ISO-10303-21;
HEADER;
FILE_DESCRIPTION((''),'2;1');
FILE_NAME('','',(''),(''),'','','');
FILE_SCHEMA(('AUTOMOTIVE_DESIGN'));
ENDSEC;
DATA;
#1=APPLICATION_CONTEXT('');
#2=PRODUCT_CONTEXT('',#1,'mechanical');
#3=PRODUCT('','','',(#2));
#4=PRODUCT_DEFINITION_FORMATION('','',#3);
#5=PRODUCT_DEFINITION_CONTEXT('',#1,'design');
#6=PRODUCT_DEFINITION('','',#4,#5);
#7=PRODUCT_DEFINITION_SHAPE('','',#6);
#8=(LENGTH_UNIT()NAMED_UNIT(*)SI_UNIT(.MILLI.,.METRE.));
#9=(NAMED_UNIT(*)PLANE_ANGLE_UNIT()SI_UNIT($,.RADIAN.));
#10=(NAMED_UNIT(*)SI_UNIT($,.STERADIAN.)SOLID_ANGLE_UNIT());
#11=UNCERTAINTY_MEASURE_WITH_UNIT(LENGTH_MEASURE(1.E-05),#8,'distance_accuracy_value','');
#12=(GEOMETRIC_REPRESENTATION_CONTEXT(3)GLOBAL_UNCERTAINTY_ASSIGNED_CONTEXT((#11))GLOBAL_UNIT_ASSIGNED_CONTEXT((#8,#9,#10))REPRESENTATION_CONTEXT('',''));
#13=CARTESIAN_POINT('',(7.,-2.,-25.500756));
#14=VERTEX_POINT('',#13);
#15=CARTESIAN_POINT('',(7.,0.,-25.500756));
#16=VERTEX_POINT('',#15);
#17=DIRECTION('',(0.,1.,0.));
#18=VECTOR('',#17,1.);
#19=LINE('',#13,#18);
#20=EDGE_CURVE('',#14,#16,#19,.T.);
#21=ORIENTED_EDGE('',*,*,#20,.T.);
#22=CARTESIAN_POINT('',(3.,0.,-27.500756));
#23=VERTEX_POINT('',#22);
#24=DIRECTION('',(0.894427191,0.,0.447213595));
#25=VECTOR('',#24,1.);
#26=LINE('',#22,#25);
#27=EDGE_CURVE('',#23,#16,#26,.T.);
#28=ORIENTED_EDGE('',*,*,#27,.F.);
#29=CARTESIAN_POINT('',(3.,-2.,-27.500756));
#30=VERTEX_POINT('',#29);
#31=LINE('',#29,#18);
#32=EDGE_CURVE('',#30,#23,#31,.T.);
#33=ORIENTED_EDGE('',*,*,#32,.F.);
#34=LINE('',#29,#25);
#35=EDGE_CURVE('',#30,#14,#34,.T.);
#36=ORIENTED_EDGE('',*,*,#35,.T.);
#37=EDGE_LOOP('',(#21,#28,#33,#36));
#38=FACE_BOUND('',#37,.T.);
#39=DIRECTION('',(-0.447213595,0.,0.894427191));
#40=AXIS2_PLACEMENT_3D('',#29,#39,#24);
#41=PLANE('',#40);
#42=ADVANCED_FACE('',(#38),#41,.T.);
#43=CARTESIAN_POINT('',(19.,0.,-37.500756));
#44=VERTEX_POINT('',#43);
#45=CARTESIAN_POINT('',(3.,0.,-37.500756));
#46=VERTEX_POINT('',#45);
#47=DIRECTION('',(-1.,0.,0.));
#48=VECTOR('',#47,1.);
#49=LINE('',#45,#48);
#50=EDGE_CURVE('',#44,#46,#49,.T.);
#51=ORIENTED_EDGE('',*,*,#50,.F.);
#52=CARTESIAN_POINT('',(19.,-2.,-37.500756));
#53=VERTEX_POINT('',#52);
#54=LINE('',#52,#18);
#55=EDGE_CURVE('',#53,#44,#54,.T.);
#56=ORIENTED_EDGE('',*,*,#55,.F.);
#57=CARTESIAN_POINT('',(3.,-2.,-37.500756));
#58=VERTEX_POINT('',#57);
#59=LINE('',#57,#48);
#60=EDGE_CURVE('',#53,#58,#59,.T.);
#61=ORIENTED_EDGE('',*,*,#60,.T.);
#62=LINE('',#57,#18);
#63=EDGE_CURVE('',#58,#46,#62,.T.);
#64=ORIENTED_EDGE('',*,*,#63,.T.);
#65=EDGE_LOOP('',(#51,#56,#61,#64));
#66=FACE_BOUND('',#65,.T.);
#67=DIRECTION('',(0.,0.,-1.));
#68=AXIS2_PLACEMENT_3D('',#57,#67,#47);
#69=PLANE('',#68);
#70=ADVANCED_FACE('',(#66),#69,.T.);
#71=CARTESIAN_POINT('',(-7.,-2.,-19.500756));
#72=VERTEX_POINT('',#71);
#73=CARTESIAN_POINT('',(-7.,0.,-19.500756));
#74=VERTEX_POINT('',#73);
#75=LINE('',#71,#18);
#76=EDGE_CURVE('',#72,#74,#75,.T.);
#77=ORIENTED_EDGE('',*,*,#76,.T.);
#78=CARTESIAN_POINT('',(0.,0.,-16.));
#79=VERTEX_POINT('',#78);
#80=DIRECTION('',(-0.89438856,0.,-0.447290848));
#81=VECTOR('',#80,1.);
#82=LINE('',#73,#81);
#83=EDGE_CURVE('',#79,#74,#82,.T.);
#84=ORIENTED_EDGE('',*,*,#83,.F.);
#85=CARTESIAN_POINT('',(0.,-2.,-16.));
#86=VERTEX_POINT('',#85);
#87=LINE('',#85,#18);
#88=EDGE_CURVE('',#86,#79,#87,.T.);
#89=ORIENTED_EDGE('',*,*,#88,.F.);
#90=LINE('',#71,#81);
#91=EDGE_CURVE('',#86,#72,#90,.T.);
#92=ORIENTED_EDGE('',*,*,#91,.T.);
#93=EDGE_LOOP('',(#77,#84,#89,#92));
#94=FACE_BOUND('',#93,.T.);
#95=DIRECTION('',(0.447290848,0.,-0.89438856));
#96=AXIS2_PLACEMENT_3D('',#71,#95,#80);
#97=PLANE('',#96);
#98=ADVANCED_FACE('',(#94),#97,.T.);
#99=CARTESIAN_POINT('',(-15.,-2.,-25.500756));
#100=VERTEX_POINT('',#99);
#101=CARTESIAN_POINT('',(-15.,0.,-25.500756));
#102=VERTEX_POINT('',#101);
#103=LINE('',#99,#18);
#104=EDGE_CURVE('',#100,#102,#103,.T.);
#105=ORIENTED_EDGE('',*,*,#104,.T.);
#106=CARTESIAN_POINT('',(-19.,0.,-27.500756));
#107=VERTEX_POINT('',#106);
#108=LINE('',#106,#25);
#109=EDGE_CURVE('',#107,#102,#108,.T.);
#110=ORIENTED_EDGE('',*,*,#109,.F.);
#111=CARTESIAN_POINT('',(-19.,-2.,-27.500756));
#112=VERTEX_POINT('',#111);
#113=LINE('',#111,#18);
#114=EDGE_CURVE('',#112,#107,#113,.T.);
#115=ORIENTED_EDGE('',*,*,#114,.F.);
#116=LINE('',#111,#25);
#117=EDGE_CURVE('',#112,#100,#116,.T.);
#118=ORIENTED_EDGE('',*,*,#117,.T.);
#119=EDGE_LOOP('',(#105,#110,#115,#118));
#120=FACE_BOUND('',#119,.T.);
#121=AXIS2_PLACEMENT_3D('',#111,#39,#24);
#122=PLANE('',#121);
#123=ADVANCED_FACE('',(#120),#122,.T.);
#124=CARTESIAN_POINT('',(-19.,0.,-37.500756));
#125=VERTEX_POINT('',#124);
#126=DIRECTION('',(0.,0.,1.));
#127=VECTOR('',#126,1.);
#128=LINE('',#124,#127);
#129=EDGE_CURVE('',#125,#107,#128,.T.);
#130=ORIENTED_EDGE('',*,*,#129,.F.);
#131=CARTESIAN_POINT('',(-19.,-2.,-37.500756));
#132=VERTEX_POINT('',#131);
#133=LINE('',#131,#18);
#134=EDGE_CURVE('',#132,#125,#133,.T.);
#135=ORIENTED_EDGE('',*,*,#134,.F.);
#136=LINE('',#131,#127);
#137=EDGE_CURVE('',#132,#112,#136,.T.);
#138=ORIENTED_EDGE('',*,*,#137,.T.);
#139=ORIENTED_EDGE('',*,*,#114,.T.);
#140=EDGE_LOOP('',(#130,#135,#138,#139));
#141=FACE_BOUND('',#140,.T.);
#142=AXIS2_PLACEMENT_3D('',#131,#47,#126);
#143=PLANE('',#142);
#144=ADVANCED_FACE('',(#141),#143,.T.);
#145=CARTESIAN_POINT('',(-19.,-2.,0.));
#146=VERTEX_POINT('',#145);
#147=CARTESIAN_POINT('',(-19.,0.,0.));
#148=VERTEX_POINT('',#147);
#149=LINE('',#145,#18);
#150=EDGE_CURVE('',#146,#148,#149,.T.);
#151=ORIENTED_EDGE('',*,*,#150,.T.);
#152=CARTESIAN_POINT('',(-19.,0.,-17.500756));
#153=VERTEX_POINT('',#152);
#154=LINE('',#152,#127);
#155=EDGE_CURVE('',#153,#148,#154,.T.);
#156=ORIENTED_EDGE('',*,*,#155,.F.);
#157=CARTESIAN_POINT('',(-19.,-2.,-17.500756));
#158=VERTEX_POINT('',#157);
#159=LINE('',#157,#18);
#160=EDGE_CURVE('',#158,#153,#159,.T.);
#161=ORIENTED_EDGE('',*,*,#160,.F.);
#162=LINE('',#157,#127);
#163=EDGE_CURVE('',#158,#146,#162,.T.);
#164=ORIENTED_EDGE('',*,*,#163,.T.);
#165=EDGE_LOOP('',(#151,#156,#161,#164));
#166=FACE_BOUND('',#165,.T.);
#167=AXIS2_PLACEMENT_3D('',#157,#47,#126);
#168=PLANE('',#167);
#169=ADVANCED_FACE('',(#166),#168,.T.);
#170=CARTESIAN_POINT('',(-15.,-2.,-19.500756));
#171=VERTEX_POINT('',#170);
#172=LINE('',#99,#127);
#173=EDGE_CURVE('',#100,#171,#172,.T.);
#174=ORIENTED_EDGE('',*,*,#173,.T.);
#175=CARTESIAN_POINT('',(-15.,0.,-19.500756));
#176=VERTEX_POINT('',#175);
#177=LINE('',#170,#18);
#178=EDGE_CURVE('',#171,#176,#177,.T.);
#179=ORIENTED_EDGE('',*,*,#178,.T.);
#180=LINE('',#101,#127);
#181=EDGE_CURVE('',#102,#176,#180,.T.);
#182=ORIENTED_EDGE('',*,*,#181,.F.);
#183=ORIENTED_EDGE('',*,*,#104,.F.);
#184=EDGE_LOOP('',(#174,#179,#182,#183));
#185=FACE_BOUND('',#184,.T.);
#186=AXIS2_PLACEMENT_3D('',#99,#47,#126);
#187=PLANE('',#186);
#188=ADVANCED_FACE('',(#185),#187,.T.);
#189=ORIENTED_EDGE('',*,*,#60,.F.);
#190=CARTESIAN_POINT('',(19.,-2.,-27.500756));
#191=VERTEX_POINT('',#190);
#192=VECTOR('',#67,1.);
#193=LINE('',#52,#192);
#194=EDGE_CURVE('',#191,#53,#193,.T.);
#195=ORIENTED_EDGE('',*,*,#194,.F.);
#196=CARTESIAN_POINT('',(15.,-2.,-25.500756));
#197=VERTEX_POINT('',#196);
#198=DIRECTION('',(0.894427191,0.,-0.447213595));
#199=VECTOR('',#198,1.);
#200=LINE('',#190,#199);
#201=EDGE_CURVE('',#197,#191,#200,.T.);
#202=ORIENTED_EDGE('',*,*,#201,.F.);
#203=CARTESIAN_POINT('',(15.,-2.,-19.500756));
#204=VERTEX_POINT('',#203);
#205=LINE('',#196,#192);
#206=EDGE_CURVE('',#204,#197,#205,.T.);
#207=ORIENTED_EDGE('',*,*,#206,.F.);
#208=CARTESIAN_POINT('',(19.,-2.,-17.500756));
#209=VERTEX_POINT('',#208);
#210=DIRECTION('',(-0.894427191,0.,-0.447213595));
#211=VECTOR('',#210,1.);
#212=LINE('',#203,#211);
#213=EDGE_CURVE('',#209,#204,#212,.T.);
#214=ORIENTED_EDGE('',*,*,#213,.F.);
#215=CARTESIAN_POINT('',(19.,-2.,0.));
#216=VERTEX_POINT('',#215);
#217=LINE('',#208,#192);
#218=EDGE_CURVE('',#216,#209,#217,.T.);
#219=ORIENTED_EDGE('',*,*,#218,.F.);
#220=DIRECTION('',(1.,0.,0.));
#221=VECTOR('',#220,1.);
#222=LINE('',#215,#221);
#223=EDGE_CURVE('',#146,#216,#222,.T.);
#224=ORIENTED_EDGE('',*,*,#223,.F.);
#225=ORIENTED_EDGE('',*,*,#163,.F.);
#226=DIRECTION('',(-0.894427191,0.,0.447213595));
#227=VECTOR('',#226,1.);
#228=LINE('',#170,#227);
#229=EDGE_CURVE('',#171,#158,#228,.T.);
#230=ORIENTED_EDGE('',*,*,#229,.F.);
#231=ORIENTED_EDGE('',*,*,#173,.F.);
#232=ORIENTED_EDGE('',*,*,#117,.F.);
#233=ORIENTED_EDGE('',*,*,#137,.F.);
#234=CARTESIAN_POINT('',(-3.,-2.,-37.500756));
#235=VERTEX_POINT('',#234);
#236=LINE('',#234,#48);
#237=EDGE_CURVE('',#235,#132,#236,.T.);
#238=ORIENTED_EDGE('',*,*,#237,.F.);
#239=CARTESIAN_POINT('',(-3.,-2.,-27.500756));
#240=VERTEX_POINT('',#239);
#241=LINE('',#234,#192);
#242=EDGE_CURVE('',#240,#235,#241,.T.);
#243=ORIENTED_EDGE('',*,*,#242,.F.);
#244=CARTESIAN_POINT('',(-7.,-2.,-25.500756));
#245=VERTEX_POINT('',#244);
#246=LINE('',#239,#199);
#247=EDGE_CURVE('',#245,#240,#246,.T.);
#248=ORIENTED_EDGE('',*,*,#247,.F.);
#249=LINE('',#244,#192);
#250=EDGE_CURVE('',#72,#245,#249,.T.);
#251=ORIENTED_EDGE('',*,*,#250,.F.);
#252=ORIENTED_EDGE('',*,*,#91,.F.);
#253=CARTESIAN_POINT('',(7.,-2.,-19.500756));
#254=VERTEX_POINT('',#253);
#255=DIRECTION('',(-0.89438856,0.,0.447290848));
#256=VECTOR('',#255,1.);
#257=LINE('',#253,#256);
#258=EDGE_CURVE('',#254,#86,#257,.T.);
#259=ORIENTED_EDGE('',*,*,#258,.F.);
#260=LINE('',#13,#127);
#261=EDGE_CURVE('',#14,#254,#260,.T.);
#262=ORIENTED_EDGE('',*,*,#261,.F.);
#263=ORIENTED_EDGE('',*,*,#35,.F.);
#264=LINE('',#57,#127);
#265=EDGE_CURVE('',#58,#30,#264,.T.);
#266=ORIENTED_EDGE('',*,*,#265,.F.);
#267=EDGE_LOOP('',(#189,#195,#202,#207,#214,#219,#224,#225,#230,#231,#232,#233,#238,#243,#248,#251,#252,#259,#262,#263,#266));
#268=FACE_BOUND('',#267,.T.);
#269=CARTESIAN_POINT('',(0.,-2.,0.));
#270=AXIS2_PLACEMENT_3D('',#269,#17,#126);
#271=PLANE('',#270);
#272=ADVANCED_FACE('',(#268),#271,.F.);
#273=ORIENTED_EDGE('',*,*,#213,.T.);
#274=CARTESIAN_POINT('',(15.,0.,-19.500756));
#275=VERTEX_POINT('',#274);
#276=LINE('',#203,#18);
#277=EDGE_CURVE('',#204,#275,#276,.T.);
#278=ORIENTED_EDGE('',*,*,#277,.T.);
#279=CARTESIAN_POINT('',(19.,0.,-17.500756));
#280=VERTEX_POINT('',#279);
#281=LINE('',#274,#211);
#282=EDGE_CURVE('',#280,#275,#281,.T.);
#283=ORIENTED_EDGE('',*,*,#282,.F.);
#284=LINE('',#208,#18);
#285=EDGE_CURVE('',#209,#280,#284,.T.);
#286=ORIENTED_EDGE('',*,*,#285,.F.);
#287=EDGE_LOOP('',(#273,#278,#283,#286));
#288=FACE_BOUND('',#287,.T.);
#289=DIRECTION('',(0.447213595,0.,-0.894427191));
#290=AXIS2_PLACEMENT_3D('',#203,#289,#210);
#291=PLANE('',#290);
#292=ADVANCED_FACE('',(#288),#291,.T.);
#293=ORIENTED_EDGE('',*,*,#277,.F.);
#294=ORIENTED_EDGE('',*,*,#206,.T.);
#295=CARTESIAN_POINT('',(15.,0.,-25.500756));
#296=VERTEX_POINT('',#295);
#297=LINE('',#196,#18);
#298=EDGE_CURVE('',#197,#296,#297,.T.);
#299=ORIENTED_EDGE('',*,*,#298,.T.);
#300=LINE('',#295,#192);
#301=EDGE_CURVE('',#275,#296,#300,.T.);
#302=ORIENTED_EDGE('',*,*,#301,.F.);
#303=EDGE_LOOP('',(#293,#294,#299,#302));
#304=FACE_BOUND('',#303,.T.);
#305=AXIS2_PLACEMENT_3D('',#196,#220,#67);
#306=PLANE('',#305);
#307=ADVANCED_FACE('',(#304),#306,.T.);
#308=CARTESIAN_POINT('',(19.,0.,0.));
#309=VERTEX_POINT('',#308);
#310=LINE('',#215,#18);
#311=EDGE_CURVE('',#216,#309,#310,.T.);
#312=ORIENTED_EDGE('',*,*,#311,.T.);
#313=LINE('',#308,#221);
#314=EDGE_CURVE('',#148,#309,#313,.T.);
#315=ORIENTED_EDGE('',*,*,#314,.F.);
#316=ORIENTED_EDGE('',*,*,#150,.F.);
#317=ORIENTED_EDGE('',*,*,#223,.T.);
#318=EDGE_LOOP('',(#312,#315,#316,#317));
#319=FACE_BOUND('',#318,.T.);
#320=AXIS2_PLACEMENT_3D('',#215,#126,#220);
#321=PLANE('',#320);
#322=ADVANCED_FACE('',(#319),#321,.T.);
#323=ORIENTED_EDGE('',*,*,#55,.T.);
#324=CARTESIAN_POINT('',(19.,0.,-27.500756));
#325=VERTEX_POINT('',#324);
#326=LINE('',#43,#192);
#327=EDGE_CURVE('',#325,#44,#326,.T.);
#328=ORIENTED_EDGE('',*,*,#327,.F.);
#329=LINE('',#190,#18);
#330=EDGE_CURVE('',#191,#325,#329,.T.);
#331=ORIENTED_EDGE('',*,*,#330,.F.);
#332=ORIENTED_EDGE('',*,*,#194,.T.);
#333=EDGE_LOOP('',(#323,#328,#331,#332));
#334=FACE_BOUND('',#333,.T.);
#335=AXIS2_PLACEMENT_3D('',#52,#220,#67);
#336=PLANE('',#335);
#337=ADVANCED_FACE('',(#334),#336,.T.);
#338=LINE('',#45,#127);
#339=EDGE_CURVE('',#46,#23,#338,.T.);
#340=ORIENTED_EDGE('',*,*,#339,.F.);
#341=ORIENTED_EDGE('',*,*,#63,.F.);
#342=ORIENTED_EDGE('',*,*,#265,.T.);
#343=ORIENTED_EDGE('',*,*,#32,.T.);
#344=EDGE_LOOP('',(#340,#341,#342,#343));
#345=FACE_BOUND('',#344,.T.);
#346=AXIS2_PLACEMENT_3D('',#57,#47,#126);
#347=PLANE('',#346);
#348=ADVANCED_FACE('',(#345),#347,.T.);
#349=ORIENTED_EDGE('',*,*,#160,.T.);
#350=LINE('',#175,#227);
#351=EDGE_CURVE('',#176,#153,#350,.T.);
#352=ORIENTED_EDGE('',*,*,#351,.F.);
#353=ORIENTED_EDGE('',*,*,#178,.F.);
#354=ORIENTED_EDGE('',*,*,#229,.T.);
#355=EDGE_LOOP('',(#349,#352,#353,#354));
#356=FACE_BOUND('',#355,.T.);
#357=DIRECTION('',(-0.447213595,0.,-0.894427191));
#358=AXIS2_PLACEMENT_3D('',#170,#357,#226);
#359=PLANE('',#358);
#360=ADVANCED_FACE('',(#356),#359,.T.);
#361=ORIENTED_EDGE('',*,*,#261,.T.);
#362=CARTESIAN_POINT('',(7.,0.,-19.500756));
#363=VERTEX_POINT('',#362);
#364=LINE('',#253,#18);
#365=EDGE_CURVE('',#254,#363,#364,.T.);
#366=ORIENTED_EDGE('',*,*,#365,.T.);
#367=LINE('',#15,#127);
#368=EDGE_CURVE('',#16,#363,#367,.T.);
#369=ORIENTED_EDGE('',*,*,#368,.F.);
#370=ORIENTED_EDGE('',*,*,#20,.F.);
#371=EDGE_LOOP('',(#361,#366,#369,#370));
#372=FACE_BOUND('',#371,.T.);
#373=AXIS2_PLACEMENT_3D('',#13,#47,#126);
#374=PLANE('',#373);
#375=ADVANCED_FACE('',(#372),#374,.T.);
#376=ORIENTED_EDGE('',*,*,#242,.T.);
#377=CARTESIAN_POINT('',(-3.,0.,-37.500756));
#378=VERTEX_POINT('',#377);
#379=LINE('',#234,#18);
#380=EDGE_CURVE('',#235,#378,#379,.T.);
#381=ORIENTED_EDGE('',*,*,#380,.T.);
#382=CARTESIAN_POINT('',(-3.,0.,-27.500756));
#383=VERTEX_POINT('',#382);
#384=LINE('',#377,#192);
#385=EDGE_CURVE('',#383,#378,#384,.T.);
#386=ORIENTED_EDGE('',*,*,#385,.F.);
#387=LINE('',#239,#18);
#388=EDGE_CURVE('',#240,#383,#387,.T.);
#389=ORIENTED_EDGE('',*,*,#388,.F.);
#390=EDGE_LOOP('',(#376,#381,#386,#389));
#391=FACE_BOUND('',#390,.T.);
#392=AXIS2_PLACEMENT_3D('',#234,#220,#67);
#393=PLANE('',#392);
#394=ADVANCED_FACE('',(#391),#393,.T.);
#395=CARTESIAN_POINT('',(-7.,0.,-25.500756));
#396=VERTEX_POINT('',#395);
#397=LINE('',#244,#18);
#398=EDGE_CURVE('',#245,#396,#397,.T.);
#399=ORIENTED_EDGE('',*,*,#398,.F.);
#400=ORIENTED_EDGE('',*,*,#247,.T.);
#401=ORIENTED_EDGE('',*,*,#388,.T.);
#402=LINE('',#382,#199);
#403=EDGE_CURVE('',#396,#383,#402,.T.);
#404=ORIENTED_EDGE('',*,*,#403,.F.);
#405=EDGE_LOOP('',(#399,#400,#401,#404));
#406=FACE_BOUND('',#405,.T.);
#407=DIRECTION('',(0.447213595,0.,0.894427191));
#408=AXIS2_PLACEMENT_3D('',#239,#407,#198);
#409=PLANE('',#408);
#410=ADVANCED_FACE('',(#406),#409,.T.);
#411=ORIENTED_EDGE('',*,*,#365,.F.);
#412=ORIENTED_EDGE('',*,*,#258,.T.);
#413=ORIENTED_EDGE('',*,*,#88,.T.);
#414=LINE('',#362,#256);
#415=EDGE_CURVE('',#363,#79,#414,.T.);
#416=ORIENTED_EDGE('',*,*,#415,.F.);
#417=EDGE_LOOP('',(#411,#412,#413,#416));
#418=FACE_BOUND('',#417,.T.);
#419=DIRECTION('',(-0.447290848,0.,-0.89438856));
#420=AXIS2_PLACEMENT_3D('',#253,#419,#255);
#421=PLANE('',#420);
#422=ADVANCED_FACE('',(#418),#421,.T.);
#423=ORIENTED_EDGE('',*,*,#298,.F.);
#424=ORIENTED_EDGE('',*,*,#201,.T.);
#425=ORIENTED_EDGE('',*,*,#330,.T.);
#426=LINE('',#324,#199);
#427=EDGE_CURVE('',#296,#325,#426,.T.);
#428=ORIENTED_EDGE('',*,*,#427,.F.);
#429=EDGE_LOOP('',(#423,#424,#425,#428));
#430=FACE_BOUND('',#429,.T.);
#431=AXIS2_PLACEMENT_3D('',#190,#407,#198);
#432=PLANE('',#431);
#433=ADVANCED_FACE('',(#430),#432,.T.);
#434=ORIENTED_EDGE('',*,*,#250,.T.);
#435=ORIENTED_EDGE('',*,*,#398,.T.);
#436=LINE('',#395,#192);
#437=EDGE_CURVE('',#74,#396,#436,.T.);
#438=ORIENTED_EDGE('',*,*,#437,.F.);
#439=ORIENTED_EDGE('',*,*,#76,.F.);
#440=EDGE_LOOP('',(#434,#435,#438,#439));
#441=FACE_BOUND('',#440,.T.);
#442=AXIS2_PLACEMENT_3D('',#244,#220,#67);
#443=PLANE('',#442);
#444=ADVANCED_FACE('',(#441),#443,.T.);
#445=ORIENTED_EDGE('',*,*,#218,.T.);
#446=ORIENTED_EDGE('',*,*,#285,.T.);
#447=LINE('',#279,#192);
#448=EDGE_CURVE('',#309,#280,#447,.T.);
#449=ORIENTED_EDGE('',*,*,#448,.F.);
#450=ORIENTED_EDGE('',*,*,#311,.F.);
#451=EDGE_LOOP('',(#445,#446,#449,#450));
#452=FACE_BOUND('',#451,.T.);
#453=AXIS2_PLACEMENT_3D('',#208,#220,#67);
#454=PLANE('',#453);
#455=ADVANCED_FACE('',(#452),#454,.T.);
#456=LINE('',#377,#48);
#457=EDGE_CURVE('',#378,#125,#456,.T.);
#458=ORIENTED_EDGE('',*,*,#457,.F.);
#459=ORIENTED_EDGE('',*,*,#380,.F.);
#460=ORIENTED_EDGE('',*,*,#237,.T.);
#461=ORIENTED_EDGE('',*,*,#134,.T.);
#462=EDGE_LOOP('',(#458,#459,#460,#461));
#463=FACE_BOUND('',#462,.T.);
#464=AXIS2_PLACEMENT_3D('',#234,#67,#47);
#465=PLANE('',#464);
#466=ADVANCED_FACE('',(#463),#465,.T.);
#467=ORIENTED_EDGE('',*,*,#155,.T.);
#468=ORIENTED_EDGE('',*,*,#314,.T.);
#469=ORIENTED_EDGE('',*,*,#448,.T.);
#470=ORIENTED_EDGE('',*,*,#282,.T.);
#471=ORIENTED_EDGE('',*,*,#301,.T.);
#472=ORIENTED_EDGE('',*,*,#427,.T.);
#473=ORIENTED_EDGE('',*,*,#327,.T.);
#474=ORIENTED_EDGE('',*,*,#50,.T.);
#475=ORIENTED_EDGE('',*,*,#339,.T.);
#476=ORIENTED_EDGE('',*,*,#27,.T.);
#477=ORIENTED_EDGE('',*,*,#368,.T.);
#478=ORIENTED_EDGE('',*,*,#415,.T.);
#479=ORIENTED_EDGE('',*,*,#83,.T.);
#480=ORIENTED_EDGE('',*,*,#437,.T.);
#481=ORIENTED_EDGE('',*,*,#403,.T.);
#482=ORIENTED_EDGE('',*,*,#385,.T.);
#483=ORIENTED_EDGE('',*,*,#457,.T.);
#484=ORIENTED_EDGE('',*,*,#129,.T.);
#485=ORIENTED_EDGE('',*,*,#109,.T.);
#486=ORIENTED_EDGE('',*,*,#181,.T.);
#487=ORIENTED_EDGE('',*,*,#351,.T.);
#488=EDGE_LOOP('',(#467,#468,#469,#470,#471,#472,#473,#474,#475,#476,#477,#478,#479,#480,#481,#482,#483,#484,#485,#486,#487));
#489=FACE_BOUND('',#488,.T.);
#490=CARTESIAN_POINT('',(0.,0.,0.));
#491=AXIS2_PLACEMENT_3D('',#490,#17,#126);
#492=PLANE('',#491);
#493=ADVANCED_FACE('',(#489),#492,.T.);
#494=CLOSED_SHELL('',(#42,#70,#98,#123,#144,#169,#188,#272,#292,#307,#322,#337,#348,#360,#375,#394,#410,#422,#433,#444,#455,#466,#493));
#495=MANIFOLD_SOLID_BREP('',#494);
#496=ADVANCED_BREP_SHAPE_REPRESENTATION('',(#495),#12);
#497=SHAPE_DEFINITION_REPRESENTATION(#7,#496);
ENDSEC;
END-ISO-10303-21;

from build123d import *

# Parameters (mm, degrees)
FLANGE_BASE1_DEPTH = 2


# Sheet-metal steps are written as plain solids
with BuildPart() as part:
    # Esboço1 → Flange-base1 (new body)
    with BuildSketch(Plane(origin=(0, 0, 0), x_dir=(1, 0, 0), z_dir=(0, 1, 0))):
        Polygon((3, 37.500755799), (19, 37.500755799), (19, 27.500755799), (15, 25.500755799), (15, 19.500755799), (19, 17.500755799), (19, 0), (-19, 0), (-19, 17.500755799), (-15, 19.500755799), (-15, 25.500755799), (-19, 27.500755799), (-19, 37.500755799), (-3, 37.500755799), (-3, 27.500755799), (-7, 25.500755799), (-7, 19.500755799), (0, 16), (7, 19.500755799), (7, 25.500755799), (3, 27.500755799), align=None)
    extrude(amount=-FLANGE_BASE1_DEPTH)


solid = part.part
